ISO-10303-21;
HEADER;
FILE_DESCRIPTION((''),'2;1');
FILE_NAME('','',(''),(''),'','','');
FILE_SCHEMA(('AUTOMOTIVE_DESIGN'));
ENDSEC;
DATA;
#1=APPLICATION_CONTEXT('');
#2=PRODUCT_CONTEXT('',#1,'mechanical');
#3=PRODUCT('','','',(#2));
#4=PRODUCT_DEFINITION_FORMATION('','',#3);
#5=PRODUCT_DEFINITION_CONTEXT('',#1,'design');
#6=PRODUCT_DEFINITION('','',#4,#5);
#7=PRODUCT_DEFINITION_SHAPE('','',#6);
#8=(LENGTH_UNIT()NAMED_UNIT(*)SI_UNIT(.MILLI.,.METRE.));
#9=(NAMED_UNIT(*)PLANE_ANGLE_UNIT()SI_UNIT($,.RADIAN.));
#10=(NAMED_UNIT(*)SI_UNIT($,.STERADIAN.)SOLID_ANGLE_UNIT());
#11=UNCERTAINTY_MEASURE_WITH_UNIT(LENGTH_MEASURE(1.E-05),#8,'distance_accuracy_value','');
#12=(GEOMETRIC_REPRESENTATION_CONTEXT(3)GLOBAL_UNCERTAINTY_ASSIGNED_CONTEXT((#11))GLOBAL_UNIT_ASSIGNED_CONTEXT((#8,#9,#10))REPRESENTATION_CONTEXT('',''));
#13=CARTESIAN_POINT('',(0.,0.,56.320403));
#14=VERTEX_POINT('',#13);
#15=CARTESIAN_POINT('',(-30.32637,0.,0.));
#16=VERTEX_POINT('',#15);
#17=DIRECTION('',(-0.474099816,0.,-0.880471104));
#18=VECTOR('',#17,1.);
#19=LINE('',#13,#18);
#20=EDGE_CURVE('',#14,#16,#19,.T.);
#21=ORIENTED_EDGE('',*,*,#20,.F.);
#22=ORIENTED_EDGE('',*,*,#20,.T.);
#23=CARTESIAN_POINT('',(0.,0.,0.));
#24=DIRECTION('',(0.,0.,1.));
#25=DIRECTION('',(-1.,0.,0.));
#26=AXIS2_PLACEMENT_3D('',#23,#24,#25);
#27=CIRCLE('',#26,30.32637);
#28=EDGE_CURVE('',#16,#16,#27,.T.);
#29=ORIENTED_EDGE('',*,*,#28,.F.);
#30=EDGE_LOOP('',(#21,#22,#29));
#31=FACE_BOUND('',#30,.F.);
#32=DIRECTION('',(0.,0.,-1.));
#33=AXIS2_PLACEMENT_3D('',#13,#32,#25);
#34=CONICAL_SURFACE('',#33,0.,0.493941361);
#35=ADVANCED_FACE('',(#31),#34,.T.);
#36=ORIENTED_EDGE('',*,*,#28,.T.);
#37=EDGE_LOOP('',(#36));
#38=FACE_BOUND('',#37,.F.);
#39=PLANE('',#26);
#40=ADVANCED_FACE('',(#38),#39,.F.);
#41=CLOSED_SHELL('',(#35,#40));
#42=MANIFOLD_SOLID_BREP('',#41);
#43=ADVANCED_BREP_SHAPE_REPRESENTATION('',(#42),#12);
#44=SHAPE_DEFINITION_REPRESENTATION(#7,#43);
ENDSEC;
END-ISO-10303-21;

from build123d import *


# Not quite as in the source:
# - the program builds the solid bodies; features that only make, move or delete a surface that nothing else refers to are left out


with BuildPart() as f1:
    # F0 (on Front) → F1 (revolve)
    with BuildSketch(Plane.XZ):
        Polygon((0, 0), (0, 56.3204027712), (-30.3263701499, 0), align=None)
    revolve(axis=Axis((0, 0, 28.1602013856), (0, 0, 1)))


solid = f1.part
